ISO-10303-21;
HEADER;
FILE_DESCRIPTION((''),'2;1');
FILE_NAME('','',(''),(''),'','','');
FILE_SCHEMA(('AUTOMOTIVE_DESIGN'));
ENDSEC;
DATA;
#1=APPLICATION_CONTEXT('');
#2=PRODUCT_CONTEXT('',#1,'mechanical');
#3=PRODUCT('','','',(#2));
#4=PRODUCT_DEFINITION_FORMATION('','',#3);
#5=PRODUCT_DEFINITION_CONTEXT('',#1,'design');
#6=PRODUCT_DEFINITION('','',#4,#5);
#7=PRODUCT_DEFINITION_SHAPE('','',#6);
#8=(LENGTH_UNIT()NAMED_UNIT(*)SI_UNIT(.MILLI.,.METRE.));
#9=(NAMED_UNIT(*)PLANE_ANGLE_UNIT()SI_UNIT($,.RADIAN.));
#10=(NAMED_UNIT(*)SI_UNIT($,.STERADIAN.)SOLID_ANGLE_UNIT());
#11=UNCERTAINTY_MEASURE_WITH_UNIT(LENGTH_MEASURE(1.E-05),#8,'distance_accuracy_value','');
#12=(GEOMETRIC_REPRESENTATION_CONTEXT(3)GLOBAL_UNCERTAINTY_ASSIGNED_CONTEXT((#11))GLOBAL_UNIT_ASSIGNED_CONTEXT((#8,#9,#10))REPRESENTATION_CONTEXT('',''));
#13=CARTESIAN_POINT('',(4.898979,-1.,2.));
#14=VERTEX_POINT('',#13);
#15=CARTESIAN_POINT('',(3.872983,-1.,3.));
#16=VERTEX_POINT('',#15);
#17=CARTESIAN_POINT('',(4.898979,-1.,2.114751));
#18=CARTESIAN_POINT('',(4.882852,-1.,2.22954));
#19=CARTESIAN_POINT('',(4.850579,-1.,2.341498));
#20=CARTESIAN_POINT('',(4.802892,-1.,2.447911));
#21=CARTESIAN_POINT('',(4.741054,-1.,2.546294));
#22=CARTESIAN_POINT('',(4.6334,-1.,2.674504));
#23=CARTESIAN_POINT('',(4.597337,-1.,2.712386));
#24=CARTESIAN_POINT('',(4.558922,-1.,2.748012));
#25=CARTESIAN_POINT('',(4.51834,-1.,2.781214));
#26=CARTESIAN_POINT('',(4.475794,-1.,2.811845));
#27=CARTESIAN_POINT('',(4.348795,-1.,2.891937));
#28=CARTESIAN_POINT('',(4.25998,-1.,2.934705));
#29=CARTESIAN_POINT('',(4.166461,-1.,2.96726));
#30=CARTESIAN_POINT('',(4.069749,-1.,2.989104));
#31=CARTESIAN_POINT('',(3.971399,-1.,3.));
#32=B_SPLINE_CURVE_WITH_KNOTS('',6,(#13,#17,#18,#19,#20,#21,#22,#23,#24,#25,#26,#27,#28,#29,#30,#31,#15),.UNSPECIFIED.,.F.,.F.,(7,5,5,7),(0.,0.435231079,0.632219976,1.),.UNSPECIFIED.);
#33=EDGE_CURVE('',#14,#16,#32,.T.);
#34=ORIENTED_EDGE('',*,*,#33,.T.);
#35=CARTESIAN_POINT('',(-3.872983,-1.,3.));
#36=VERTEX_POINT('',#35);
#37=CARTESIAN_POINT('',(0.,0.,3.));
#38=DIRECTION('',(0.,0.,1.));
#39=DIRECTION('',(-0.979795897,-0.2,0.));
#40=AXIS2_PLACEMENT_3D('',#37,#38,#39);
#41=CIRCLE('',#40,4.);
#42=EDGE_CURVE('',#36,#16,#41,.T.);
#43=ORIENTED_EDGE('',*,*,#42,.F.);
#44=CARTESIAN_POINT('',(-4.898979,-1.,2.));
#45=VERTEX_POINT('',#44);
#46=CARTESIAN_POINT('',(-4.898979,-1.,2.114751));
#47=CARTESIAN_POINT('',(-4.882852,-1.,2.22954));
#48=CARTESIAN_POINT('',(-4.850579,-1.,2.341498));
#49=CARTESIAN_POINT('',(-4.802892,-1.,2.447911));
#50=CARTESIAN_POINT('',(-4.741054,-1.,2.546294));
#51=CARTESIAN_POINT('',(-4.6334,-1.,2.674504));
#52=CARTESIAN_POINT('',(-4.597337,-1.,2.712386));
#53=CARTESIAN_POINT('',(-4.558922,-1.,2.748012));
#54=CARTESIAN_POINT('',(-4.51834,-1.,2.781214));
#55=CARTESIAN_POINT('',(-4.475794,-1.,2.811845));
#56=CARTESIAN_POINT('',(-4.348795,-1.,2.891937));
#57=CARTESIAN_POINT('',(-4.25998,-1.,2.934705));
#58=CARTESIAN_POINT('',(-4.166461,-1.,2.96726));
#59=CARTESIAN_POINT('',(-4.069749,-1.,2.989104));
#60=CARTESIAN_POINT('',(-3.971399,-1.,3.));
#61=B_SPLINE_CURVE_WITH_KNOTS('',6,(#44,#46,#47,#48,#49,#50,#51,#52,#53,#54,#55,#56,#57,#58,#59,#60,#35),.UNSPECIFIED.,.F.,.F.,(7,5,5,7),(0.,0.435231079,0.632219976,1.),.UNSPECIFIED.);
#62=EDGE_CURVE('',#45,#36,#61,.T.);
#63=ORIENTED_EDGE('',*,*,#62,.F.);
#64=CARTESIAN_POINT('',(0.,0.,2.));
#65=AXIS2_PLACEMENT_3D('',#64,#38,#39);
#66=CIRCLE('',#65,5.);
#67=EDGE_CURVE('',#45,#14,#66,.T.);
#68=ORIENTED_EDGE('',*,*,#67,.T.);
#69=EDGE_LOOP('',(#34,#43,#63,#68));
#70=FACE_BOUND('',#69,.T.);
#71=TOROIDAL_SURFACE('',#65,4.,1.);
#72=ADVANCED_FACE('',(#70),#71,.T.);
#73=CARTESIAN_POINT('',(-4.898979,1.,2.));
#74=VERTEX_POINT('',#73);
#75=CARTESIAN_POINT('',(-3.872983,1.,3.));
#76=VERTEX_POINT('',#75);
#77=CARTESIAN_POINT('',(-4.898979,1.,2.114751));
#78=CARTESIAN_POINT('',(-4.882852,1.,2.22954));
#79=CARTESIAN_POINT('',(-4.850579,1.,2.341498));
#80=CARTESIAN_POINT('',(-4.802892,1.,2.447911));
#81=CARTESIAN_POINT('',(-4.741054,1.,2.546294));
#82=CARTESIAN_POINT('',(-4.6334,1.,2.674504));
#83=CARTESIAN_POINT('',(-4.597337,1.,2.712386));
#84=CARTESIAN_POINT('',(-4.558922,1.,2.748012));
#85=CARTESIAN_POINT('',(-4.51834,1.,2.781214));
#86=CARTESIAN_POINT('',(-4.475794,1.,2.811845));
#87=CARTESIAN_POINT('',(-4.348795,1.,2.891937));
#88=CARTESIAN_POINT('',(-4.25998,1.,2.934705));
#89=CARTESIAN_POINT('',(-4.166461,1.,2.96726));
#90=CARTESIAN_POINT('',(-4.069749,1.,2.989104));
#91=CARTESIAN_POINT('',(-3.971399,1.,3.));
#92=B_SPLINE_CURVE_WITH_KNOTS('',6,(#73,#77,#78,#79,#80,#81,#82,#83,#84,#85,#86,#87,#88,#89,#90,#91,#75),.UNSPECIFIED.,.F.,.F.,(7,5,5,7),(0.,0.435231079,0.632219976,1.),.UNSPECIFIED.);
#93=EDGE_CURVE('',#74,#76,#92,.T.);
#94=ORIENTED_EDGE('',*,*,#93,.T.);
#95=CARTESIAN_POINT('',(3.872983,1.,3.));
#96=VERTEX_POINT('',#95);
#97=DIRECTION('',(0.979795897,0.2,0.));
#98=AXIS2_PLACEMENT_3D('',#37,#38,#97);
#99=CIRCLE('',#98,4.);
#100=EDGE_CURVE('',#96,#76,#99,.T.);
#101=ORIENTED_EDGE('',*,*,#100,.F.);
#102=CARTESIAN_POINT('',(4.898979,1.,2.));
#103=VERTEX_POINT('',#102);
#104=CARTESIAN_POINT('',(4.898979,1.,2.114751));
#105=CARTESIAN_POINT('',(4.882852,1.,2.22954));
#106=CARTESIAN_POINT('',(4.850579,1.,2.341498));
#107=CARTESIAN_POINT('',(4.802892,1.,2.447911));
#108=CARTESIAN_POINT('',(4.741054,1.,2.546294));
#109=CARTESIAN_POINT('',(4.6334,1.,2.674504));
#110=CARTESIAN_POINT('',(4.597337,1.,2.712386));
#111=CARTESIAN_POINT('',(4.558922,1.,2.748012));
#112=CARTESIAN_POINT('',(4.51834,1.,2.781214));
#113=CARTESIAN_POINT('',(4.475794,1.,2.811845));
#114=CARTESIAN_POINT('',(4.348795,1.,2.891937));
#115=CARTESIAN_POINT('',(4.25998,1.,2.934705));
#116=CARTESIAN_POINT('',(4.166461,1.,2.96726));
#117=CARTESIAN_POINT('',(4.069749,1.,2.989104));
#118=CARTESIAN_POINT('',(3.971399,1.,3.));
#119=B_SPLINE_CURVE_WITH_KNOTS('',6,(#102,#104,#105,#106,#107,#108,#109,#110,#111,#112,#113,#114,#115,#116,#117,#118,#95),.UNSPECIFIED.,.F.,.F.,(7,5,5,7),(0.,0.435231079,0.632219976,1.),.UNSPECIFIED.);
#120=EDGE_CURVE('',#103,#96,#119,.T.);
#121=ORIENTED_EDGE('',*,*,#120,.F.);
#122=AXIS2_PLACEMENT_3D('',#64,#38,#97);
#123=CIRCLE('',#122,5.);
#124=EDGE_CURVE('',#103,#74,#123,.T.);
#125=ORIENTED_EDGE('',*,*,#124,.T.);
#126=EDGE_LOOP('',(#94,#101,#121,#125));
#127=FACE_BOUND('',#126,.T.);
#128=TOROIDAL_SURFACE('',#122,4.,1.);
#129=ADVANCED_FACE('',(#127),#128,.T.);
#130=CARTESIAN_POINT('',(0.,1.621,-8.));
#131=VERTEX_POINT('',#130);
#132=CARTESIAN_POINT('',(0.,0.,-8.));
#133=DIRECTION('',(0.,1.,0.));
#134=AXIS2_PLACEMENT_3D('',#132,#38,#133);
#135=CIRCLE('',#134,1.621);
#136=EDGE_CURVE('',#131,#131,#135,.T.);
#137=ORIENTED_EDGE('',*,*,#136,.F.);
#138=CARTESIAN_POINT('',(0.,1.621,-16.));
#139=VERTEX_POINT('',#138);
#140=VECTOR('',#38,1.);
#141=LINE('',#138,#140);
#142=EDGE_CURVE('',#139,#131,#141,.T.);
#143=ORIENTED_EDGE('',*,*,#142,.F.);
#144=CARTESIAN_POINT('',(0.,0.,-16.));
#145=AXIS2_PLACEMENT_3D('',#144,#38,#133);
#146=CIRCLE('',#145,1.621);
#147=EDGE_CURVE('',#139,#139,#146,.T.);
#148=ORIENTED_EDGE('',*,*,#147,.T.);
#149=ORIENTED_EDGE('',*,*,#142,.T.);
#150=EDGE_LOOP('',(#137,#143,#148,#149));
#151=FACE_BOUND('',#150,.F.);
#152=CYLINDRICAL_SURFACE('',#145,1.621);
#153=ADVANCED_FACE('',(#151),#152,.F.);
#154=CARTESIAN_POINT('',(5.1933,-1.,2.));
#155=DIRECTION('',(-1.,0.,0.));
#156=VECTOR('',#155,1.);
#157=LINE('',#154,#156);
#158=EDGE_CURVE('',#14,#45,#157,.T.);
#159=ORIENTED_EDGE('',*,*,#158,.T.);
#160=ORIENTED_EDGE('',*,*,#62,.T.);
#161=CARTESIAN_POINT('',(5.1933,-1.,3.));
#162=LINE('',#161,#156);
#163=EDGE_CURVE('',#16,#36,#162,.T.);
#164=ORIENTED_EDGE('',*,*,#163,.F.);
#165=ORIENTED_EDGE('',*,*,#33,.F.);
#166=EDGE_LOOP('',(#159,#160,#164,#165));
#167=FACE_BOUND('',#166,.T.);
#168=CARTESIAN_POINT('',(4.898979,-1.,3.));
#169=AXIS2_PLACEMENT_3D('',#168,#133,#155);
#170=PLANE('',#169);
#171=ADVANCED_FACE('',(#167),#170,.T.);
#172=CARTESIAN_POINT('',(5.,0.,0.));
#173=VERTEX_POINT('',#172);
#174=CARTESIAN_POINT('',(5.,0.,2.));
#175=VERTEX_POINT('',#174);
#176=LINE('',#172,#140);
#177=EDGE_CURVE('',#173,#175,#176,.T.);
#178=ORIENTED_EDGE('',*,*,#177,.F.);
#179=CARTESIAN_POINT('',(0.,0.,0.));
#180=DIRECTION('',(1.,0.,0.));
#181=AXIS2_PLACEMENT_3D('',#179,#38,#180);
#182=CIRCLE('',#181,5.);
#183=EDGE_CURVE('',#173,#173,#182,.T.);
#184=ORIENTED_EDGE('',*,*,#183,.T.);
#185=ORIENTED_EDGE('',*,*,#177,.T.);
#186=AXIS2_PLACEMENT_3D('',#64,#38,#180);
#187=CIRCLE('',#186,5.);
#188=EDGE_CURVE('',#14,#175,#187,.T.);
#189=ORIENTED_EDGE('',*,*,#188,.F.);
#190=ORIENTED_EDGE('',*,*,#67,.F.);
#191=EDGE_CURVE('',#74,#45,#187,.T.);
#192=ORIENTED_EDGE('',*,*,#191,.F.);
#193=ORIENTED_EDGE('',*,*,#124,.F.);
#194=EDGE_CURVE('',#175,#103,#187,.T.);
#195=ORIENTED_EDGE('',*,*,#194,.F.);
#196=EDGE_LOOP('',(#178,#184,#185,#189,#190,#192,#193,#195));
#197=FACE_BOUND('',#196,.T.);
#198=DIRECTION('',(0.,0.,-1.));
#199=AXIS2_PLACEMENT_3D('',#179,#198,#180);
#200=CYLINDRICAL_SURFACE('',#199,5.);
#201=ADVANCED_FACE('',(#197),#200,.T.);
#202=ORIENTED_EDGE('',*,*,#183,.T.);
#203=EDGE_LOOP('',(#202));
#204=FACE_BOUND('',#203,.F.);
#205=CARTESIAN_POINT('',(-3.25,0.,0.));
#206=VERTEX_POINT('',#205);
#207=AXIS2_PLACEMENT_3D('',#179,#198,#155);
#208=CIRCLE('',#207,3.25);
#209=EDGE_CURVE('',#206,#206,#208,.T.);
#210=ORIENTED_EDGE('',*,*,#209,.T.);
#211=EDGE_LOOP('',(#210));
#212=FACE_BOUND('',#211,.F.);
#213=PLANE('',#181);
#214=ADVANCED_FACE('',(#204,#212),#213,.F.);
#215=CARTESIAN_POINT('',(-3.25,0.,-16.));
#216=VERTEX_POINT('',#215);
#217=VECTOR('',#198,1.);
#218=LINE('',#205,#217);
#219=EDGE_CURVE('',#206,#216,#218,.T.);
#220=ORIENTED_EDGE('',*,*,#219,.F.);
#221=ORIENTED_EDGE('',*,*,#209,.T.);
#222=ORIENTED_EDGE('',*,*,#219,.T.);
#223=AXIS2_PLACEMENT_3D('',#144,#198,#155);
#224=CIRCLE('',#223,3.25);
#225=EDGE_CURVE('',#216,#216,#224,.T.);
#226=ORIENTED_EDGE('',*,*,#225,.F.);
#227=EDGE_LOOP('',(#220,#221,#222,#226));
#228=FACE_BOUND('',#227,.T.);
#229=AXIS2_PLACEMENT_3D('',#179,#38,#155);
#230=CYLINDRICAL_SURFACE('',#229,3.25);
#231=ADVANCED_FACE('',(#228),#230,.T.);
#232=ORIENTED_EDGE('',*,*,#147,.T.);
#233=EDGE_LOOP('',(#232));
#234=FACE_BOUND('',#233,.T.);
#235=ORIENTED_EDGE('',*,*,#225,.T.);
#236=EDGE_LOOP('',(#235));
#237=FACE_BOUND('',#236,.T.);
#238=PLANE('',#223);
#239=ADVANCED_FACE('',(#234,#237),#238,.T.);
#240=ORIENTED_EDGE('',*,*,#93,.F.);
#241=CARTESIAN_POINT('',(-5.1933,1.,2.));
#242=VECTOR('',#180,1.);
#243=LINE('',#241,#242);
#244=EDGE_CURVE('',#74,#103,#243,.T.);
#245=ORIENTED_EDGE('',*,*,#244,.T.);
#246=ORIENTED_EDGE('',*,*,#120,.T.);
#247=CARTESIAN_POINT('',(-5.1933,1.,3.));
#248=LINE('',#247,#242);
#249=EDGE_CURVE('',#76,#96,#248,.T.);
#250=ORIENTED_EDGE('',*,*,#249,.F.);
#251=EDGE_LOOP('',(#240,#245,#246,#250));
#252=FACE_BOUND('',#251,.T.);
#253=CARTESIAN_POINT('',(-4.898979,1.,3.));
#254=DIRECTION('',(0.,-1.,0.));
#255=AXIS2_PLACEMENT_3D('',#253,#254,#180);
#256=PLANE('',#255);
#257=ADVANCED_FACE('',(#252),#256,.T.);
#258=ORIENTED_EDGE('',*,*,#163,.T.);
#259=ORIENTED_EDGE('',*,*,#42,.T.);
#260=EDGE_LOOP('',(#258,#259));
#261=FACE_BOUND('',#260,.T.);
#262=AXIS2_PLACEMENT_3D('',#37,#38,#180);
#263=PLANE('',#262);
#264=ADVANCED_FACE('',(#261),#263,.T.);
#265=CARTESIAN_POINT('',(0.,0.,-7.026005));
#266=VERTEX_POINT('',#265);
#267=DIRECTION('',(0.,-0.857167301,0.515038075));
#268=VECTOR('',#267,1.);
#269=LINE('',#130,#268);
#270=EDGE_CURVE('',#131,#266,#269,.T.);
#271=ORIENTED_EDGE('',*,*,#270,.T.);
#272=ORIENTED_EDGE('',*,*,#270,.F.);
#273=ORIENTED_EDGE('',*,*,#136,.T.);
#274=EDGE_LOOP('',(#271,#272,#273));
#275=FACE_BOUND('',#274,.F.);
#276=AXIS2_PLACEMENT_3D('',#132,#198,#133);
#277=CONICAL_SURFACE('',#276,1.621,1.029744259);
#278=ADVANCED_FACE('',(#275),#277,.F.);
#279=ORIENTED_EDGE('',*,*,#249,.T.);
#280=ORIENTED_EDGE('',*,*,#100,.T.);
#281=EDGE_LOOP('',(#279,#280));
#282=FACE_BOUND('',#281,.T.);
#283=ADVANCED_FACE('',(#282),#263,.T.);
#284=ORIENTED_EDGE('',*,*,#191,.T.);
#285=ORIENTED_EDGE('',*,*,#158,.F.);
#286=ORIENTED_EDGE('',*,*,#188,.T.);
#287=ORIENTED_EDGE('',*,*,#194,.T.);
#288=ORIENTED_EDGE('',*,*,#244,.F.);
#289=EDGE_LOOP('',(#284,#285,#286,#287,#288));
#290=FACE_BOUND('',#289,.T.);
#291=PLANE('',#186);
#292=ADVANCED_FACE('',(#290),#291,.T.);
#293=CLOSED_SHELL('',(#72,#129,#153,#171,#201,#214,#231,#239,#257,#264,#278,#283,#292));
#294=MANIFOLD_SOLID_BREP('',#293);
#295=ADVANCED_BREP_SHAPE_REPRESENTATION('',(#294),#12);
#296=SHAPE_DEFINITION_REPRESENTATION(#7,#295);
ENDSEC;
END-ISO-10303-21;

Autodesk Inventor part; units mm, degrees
ref_plane "YZ Plane" through (0, 0, 0) normal (1, 0, 0) x (0, 1, 0)
ref_plane "XZ Plane" through (0, 0, 0) normal (0, 1, 0) x (-1, 0, 0)
ref_plane "XY Plane" through (0, 0, 0) normal (0, 0, 1) x (1, 0, 0)
sketch "Sketch1" plane through (0, 0, 0) normal (0, 0, 1) x (1, 0, 0)
  circle A0 centre (0, 0) radius 5
  dimension "d0" = 10
extrude "Extrusion1" add sketch "Sketch1" along normal blind 3
sketch "Sketch2" plane through (0, 0, 3) normal (0, 0, 1) x (1, 0, 0)
  circle A0 centre (0, 0) radius 5 projected
  line L0 (-5.1933, 1) -> (5.1933, 1)
  line L1 (5.1933, 1) -> (5.1933, -1)
  line L2 (5.1933, -1) -> (-5.1933, -1)
  line L3 (-5.1933, -1) -> (-5.1933, 1)
  line L4 (-5.1933, 1) -> (5.1933, -1) construction
  line L5 (5.1933, 1) -> (-5.1933, -1) construction
  point P0 (-4.899, -1)
  point P1 (4.899, -1)
  point P2 (4.899, 1)
  point P3 (-4.899, 1)
  dimension "d3" = 2
  dimension "d4" = 79.101
extrude "Extrusion2" cut sketch "Sketch2" against normal blind 1 contours A0 L2 L0
fillet "Fillet1" radius 1 2 edges at (0, 5, 3) (0, -5, 3)
sketch "Sketch3" plane through (0, 0, 0) normal (0, 0, -1) x (-1, 0, 0)
  circle A0 centre (0, 0) radius 5 projected
  circle A1 centre (0, 0) radius 3.25
  dimension "d8" = 6.5
extrude "Extrusion3" add sketch "Sketch3" along normal blind 16 contours A1
sketch "Sketch4" plane through (0, 0, -16) normal (0, 0, -1) x (-1, 0, 0)
  circle A0 centre (0, 0) radius 3.25 projected
hole "Hole1" at (0, 0, -16) direction (0, 0, 1) diameter 3.242 depth 8 tip angle 118 thread size "M4x0.7" class "6H" standard "ANSI Metric M Profile"
properties part number "17B - Crosshead Pin2" material "Steel AISI 1020 107 HR"
